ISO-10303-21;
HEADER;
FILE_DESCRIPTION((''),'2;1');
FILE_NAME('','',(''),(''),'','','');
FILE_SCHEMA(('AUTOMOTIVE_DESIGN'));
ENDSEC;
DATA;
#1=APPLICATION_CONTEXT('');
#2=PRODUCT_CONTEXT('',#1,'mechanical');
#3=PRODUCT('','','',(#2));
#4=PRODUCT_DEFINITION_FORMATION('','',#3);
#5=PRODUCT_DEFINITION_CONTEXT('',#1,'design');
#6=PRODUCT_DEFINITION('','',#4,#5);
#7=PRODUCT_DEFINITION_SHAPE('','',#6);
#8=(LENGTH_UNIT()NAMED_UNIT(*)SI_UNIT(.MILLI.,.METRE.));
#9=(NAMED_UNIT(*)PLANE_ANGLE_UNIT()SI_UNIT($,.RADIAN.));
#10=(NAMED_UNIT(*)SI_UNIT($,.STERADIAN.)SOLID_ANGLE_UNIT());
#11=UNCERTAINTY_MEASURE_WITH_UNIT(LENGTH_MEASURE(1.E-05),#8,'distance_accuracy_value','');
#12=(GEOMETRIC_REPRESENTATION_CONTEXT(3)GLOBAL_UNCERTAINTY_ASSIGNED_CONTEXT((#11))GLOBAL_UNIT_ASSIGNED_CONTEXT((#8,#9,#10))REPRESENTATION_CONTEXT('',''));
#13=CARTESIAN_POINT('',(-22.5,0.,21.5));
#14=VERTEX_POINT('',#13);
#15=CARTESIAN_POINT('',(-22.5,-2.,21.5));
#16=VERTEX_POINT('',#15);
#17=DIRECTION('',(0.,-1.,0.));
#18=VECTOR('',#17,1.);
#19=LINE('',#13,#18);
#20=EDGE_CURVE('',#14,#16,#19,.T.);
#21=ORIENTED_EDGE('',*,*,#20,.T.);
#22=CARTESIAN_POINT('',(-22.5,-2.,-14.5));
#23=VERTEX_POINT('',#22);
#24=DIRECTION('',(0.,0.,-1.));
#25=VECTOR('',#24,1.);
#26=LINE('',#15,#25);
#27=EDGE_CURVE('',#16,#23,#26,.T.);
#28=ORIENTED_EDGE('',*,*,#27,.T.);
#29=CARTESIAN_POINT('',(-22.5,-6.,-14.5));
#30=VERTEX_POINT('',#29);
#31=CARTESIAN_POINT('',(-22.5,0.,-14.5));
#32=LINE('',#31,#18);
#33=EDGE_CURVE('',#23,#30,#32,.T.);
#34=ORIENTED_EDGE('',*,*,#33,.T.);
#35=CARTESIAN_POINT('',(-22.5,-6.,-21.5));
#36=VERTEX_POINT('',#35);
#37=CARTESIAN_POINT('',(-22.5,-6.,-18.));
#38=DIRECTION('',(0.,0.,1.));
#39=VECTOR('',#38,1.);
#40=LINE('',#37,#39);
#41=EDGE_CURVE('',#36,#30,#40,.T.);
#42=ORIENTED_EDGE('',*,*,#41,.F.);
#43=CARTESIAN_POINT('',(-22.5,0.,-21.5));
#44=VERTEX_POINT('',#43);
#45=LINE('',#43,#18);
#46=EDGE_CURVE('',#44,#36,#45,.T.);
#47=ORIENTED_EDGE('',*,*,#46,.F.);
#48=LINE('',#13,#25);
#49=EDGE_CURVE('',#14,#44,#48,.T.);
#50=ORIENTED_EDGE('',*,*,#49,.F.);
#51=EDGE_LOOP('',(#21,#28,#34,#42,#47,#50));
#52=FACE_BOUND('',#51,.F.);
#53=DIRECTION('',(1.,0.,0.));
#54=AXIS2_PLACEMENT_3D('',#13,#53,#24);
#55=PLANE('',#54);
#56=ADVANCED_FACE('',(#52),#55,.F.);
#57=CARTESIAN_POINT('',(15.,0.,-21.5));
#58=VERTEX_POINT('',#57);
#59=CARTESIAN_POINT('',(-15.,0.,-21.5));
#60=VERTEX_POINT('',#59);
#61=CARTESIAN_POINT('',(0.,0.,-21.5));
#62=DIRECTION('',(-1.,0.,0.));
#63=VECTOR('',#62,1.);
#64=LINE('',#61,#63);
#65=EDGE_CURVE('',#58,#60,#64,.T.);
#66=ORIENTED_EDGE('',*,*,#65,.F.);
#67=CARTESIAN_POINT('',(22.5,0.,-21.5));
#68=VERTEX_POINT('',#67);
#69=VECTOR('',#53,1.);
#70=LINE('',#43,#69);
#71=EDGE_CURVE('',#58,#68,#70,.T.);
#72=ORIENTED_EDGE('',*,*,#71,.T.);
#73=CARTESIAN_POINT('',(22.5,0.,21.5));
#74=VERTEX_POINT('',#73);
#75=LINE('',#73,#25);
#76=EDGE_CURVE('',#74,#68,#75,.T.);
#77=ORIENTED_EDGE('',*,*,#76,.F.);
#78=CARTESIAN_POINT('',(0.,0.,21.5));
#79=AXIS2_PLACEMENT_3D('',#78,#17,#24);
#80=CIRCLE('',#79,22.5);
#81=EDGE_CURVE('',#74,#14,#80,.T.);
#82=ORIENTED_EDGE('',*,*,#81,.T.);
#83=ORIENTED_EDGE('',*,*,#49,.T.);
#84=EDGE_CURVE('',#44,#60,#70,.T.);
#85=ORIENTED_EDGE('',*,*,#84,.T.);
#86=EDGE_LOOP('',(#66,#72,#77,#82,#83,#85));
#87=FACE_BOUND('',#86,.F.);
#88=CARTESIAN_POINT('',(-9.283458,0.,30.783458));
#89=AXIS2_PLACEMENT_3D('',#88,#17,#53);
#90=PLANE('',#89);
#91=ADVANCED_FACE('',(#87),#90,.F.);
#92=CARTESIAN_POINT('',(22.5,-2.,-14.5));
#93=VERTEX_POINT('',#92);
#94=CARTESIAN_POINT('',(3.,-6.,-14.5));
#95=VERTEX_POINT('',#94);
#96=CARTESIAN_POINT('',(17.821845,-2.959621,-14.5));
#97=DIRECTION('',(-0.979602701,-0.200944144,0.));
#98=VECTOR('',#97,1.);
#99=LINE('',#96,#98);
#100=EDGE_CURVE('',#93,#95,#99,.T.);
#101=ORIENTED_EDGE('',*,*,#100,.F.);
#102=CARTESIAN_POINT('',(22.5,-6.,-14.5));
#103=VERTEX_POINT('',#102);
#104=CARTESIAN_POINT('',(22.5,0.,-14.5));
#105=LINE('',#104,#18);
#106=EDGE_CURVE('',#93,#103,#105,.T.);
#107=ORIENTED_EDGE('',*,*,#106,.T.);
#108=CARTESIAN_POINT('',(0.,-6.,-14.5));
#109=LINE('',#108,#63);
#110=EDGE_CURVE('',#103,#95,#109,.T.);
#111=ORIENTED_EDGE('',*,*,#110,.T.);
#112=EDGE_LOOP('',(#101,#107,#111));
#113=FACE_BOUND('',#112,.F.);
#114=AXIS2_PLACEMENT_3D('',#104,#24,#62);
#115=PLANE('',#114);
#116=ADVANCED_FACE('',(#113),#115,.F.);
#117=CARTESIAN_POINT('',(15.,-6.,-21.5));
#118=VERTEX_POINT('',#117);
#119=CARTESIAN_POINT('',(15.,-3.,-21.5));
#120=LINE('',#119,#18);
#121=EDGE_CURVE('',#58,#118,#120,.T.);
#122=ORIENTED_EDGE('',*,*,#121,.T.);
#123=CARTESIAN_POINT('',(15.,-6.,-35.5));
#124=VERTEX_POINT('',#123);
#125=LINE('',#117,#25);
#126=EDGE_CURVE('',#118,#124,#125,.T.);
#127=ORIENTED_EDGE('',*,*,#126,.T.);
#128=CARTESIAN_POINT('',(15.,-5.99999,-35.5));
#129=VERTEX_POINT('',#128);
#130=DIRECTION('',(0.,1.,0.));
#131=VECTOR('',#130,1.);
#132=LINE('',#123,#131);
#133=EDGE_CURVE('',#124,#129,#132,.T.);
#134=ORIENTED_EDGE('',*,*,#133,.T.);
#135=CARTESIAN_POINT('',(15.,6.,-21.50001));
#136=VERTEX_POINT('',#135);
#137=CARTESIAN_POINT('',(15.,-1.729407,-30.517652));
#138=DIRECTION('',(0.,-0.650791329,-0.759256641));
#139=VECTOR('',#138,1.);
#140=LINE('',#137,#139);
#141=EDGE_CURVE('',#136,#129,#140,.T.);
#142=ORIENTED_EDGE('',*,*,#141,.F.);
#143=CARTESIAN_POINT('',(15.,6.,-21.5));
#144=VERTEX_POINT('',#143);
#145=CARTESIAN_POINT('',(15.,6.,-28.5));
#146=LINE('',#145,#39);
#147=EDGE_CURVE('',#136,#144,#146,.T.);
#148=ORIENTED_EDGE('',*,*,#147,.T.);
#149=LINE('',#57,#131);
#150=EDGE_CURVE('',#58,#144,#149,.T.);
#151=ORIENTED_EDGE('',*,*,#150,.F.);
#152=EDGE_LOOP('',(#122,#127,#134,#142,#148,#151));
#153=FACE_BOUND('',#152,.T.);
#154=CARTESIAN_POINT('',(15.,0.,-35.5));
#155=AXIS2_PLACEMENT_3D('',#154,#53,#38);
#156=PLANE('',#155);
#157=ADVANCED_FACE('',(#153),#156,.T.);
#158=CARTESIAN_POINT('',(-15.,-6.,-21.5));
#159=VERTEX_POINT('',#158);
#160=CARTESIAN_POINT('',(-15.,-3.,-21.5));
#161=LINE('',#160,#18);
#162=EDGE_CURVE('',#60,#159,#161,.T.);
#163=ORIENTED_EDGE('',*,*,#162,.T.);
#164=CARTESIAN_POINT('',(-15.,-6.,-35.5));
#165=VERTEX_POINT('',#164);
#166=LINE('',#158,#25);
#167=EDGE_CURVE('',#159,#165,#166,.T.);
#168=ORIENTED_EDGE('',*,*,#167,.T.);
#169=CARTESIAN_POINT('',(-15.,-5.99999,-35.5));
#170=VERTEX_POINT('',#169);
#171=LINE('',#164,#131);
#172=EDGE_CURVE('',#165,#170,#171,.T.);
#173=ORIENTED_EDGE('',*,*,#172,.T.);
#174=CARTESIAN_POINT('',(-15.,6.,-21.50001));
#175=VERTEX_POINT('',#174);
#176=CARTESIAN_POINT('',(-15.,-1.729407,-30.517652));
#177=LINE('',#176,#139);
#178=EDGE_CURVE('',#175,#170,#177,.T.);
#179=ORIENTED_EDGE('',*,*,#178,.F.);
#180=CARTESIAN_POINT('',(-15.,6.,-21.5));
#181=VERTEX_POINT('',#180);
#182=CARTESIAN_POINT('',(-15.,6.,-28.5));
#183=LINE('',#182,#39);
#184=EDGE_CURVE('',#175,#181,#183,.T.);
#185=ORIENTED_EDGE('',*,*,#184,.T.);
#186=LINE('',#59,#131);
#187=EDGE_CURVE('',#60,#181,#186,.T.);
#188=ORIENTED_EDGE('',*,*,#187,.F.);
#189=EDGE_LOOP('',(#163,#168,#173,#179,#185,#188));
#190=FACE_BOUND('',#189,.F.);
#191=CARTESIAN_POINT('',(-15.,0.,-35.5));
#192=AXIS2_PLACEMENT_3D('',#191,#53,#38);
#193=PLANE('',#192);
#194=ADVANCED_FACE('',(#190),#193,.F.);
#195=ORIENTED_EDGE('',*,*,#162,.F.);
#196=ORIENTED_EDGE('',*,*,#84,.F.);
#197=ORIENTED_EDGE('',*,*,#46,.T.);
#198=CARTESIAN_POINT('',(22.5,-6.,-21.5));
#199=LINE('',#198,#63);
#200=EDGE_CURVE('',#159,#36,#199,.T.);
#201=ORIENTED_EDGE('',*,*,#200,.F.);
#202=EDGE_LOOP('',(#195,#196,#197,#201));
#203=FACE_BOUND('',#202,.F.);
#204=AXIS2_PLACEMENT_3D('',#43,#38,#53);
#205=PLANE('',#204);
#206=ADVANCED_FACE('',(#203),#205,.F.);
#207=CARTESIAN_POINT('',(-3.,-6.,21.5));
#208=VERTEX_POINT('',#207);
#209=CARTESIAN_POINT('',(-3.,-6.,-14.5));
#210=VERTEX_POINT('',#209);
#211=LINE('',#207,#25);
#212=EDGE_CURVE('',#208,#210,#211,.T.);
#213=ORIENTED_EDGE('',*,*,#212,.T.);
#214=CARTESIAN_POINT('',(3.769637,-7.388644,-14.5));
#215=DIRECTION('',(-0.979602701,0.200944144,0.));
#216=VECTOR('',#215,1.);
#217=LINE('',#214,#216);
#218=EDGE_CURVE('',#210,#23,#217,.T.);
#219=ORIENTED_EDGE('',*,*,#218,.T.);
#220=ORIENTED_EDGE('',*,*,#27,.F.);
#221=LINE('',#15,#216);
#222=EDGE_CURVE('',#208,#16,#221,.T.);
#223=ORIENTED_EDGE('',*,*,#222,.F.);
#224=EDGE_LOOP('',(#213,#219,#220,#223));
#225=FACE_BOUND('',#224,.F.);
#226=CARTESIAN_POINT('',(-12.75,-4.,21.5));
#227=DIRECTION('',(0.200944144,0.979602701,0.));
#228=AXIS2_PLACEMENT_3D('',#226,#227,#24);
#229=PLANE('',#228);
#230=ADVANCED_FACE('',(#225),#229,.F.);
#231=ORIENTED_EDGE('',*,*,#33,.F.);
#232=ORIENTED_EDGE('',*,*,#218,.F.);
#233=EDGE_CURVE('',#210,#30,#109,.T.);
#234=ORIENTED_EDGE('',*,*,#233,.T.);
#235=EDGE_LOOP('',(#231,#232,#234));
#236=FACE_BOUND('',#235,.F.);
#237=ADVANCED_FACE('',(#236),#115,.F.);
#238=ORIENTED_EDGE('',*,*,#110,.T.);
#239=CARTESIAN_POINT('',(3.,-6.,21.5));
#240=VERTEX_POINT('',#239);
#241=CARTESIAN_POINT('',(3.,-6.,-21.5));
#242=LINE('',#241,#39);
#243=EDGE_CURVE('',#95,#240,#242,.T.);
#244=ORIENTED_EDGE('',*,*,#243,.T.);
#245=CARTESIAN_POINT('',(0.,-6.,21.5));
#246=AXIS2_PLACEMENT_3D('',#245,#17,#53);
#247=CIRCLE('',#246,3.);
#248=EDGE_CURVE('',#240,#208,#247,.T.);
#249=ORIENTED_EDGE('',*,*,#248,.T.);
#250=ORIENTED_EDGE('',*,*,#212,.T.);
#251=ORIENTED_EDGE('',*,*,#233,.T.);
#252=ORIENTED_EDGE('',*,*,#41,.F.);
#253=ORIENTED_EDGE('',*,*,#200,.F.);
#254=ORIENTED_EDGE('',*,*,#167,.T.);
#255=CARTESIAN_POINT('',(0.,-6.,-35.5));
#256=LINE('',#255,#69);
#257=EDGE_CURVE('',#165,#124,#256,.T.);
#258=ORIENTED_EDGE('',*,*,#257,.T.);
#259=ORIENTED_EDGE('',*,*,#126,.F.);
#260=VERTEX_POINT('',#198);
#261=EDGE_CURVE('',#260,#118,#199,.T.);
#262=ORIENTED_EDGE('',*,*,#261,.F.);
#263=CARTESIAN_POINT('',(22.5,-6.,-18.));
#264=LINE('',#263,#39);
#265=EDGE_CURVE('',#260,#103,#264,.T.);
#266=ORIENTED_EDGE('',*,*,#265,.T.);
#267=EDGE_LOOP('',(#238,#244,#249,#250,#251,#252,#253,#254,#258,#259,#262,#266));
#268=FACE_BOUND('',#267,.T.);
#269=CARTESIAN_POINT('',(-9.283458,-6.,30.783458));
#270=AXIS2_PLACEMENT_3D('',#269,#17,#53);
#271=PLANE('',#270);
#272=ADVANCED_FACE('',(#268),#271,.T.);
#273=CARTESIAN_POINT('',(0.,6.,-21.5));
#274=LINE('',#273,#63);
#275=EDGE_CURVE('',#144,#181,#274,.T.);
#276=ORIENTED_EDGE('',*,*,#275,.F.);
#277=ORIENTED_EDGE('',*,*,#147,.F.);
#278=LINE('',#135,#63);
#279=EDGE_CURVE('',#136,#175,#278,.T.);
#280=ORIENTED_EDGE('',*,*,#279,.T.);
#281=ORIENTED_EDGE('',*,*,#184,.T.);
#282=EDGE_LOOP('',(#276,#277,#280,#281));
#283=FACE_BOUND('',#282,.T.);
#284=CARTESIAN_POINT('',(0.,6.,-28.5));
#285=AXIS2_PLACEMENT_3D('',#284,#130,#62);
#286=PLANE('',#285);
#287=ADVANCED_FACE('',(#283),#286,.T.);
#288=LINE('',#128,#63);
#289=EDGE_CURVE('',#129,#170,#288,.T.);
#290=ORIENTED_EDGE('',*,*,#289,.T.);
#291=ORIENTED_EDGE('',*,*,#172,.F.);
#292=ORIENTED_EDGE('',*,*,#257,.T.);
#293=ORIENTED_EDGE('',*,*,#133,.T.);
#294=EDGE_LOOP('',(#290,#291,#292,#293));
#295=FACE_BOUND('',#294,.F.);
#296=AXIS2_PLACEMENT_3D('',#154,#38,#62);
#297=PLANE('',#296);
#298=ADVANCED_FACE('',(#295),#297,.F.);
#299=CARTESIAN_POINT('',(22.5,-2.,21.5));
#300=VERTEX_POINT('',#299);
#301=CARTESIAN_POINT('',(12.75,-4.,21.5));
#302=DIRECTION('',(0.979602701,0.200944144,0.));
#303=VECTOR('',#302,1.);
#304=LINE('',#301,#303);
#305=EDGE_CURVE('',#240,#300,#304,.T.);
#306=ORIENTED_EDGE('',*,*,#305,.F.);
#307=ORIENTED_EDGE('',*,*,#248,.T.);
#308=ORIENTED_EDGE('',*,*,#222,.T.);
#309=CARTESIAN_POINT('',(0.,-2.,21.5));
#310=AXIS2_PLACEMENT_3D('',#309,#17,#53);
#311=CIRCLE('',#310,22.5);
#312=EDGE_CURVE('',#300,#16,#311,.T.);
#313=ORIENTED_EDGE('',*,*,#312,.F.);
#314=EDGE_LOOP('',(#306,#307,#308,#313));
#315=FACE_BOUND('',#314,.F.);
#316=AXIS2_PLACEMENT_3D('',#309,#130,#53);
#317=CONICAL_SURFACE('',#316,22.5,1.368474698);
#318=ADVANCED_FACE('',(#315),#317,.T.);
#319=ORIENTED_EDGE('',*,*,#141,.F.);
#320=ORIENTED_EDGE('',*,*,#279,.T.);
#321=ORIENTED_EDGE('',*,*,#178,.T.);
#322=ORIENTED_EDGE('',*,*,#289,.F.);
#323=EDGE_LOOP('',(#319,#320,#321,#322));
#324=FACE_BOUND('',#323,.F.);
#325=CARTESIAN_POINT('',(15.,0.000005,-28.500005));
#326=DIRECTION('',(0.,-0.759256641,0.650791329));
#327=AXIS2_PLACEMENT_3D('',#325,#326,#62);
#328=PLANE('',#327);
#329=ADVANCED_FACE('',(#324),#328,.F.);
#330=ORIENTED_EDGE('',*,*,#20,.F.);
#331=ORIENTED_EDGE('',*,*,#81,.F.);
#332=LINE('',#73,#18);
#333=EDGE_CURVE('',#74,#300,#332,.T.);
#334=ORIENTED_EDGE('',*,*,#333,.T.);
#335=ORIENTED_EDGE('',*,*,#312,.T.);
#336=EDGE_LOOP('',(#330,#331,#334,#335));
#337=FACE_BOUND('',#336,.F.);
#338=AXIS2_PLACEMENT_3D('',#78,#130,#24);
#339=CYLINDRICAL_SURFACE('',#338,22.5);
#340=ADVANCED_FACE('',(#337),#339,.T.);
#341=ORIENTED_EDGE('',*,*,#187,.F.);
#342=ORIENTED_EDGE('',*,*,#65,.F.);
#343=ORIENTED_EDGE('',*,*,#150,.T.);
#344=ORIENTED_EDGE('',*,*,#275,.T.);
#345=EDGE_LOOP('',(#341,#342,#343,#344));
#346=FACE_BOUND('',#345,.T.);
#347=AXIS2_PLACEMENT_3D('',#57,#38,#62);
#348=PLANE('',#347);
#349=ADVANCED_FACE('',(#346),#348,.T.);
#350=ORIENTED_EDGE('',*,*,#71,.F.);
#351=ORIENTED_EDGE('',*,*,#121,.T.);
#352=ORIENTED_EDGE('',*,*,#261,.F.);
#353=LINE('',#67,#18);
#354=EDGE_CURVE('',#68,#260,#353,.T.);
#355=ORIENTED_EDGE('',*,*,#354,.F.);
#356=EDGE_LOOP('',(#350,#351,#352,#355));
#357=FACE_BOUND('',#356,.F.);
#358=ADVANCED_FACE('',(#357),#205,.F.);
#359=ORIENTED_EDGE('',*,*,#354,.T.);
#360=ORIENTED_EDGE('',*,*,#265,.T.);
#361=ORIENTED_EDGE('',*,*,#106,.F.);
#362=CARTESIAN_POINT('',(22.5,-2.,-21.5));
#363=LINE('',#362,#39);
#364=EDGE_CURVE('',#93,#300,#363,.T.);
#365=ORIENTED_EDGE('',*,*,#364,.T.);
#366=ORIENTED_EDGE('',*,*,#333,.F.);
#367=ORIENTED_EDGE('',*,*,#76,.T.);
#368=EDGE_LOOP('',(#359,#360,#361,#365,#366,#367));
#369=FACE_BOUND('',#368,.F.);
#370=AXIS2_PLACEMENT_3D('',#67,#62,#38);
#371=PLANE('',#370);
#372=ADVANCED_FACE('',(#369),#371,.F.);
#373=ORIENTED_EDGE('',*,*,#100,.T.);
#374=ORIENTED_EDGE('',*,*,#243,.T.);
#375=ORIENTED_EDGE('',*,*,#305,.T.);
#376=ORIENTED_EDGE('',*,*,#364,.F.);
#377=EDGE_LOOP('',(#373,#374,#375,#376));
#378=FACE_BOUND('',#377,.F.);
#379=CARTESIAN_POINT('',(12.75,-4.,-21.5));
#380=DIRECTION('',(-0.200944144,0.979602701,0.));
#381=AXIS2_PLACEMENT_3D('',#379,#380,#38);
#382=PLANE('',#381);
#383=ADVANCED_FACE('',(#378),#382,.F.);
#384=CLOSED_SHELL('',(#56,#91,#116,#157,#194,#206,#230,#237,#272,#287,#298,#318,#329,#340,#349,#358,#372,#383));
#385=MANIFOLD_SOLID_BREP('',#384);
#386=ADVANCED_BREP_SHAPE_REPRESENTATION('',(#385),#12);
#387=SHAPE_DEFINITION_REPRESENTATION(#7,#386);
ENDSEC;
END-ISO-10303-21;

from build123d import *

# Parameters (mm, degrees)
F1_DEPTH = 6
F2_SIZE2 = 4
F2_SIZE  = 19.5
F3_W     = 45
F3_H     = 7
F4_DEPTH = 6
F5_W     = 30
F5_H     = 6
F6_DEPTH = 14
F7_W     = 30
F7_H     = 14
F8_DEPTH = 6
F9_SIZE2 = 11.99999
F9_SIZE  = 13.99999


# Not quite as in the source:
# - a fillet or chamfer is up to 0.001 mm smaller than in the source, because OpenCascade refuses the exact size


with BuildPart() as f1:
    # F0 (on Front) → F1 (new body)
    with BuildSketch(Plane.XZ):
        with BuildLine():
            ThreePointArc((0, 44), (-15.9099025767, 37.4099025767), (-22.5, 21.5))
            Line((-22.5, 21.5), (0, 21.5))
            Line((0, 21.5), (0, 44))
        make_face()
        with BuildLine():
            ThreePointArc((0, -1), (-15.9099025767, 5.5900974233), (-22.5, 21.5))
            Line((-22.5, 21.5), (-22.5, -21.5))
            Line((-22.5, -21.5), (0, -21.5))
            Line((0, -21.5), (0, -1))
        make_face()
        with BuildLine():
            Line((0, 21.5), (-22.5, 21.5))
            ThreePointArc((-22.5, 21.5), (-15.9099025767, 5.5900974233), (0, -1))
            Line((0, -1), (0, 21.5))
        make_face()
        with BuildLine():
            Line((0, 44), (0, 21.5))
            Line((0, 21.5), (22.5, 21.5))
            ThreePointArc((22.5, 21.5), (15.9099025767, 37.4099025767), (0, 44))
        make_face()
        with BuildLine():
            Line((22.5, 21.5), (0, 21.5))
            Line((0, 21.5), (0, -1))
            ThreePointArc((0, -1), (15.9099025767, 5.5900974233), (22.5, 21.5))
        make_face()
        with BuildLine():
            ThreePointArc((22.5, 21.5), (15.9099025767, 5.5900974233), (0, -1))
            Line((0, -1), (0, -21.5))
            Line((0, -21.5), (22.5, -21.5))
            Line((22.5, -21.5), (22.5, 21.5))
        make_face()
    extrude(amount=F1_DEPTH)

    # F2
    f2_edges = [f1.edges().sort_by_distance(p)[0] for p in [
        (0, -6, 44),
    ]]
    f2_side = f1.faces().sort_by_distance((0, -6, 9.043566))[0]
    chamfer(f2_edges, length=F2_SIZE, length2=F2_SIZE2, reference=f2_side)

    # F3 (on face) → F4 (join)
    with BuildSketch(Plane(origin=(0, 0, 0), x_dir=(-1, 0, 0), z_dir=(0, 1, 0))):
        with Locations((0, -18)):
            Rectangle(F3_W, F3_H)
    extrude(amount=-F4_DEPTH)

    # F5 (on face) → F6 (join)
    with BuildSketch(Plane(origin=(0, 0, -21.5), x_dir=(1, 0, 0), z_dir=(0, 0, -1))):
        with Locations((0, 3)):
            Rectangle(F5_W, F5_H)
    extrude(amount=F6_DEPTH)

    # F7 (on face) → F8 (join)
    with BuildSketch(Plane(origin=(0, 0, 0), x_dir=(-1, 0, 0), z_dir=(0, 1, 0))):
        with Locations((0, -28.5)):
            Rectangle(F7_W, F7_H)
    extrude(amount=F8_DEPTH)

    # F9 (size 14 and 12 in the source; OpenCascade refuses exactly that, so slightly less here)
    f9_edges = [f1.edges().sort_by_distance(p)[0] for p in [
        (0, 6, -35.5),
    ]]
    f9_side = f1.faces().sort_by_distance((0, 6, -28.5))[0]
    chamfer(f9_edges, length=F9_SIZE, length2=F9_SIZE2, reference=f9_side)


solid = f1.part
